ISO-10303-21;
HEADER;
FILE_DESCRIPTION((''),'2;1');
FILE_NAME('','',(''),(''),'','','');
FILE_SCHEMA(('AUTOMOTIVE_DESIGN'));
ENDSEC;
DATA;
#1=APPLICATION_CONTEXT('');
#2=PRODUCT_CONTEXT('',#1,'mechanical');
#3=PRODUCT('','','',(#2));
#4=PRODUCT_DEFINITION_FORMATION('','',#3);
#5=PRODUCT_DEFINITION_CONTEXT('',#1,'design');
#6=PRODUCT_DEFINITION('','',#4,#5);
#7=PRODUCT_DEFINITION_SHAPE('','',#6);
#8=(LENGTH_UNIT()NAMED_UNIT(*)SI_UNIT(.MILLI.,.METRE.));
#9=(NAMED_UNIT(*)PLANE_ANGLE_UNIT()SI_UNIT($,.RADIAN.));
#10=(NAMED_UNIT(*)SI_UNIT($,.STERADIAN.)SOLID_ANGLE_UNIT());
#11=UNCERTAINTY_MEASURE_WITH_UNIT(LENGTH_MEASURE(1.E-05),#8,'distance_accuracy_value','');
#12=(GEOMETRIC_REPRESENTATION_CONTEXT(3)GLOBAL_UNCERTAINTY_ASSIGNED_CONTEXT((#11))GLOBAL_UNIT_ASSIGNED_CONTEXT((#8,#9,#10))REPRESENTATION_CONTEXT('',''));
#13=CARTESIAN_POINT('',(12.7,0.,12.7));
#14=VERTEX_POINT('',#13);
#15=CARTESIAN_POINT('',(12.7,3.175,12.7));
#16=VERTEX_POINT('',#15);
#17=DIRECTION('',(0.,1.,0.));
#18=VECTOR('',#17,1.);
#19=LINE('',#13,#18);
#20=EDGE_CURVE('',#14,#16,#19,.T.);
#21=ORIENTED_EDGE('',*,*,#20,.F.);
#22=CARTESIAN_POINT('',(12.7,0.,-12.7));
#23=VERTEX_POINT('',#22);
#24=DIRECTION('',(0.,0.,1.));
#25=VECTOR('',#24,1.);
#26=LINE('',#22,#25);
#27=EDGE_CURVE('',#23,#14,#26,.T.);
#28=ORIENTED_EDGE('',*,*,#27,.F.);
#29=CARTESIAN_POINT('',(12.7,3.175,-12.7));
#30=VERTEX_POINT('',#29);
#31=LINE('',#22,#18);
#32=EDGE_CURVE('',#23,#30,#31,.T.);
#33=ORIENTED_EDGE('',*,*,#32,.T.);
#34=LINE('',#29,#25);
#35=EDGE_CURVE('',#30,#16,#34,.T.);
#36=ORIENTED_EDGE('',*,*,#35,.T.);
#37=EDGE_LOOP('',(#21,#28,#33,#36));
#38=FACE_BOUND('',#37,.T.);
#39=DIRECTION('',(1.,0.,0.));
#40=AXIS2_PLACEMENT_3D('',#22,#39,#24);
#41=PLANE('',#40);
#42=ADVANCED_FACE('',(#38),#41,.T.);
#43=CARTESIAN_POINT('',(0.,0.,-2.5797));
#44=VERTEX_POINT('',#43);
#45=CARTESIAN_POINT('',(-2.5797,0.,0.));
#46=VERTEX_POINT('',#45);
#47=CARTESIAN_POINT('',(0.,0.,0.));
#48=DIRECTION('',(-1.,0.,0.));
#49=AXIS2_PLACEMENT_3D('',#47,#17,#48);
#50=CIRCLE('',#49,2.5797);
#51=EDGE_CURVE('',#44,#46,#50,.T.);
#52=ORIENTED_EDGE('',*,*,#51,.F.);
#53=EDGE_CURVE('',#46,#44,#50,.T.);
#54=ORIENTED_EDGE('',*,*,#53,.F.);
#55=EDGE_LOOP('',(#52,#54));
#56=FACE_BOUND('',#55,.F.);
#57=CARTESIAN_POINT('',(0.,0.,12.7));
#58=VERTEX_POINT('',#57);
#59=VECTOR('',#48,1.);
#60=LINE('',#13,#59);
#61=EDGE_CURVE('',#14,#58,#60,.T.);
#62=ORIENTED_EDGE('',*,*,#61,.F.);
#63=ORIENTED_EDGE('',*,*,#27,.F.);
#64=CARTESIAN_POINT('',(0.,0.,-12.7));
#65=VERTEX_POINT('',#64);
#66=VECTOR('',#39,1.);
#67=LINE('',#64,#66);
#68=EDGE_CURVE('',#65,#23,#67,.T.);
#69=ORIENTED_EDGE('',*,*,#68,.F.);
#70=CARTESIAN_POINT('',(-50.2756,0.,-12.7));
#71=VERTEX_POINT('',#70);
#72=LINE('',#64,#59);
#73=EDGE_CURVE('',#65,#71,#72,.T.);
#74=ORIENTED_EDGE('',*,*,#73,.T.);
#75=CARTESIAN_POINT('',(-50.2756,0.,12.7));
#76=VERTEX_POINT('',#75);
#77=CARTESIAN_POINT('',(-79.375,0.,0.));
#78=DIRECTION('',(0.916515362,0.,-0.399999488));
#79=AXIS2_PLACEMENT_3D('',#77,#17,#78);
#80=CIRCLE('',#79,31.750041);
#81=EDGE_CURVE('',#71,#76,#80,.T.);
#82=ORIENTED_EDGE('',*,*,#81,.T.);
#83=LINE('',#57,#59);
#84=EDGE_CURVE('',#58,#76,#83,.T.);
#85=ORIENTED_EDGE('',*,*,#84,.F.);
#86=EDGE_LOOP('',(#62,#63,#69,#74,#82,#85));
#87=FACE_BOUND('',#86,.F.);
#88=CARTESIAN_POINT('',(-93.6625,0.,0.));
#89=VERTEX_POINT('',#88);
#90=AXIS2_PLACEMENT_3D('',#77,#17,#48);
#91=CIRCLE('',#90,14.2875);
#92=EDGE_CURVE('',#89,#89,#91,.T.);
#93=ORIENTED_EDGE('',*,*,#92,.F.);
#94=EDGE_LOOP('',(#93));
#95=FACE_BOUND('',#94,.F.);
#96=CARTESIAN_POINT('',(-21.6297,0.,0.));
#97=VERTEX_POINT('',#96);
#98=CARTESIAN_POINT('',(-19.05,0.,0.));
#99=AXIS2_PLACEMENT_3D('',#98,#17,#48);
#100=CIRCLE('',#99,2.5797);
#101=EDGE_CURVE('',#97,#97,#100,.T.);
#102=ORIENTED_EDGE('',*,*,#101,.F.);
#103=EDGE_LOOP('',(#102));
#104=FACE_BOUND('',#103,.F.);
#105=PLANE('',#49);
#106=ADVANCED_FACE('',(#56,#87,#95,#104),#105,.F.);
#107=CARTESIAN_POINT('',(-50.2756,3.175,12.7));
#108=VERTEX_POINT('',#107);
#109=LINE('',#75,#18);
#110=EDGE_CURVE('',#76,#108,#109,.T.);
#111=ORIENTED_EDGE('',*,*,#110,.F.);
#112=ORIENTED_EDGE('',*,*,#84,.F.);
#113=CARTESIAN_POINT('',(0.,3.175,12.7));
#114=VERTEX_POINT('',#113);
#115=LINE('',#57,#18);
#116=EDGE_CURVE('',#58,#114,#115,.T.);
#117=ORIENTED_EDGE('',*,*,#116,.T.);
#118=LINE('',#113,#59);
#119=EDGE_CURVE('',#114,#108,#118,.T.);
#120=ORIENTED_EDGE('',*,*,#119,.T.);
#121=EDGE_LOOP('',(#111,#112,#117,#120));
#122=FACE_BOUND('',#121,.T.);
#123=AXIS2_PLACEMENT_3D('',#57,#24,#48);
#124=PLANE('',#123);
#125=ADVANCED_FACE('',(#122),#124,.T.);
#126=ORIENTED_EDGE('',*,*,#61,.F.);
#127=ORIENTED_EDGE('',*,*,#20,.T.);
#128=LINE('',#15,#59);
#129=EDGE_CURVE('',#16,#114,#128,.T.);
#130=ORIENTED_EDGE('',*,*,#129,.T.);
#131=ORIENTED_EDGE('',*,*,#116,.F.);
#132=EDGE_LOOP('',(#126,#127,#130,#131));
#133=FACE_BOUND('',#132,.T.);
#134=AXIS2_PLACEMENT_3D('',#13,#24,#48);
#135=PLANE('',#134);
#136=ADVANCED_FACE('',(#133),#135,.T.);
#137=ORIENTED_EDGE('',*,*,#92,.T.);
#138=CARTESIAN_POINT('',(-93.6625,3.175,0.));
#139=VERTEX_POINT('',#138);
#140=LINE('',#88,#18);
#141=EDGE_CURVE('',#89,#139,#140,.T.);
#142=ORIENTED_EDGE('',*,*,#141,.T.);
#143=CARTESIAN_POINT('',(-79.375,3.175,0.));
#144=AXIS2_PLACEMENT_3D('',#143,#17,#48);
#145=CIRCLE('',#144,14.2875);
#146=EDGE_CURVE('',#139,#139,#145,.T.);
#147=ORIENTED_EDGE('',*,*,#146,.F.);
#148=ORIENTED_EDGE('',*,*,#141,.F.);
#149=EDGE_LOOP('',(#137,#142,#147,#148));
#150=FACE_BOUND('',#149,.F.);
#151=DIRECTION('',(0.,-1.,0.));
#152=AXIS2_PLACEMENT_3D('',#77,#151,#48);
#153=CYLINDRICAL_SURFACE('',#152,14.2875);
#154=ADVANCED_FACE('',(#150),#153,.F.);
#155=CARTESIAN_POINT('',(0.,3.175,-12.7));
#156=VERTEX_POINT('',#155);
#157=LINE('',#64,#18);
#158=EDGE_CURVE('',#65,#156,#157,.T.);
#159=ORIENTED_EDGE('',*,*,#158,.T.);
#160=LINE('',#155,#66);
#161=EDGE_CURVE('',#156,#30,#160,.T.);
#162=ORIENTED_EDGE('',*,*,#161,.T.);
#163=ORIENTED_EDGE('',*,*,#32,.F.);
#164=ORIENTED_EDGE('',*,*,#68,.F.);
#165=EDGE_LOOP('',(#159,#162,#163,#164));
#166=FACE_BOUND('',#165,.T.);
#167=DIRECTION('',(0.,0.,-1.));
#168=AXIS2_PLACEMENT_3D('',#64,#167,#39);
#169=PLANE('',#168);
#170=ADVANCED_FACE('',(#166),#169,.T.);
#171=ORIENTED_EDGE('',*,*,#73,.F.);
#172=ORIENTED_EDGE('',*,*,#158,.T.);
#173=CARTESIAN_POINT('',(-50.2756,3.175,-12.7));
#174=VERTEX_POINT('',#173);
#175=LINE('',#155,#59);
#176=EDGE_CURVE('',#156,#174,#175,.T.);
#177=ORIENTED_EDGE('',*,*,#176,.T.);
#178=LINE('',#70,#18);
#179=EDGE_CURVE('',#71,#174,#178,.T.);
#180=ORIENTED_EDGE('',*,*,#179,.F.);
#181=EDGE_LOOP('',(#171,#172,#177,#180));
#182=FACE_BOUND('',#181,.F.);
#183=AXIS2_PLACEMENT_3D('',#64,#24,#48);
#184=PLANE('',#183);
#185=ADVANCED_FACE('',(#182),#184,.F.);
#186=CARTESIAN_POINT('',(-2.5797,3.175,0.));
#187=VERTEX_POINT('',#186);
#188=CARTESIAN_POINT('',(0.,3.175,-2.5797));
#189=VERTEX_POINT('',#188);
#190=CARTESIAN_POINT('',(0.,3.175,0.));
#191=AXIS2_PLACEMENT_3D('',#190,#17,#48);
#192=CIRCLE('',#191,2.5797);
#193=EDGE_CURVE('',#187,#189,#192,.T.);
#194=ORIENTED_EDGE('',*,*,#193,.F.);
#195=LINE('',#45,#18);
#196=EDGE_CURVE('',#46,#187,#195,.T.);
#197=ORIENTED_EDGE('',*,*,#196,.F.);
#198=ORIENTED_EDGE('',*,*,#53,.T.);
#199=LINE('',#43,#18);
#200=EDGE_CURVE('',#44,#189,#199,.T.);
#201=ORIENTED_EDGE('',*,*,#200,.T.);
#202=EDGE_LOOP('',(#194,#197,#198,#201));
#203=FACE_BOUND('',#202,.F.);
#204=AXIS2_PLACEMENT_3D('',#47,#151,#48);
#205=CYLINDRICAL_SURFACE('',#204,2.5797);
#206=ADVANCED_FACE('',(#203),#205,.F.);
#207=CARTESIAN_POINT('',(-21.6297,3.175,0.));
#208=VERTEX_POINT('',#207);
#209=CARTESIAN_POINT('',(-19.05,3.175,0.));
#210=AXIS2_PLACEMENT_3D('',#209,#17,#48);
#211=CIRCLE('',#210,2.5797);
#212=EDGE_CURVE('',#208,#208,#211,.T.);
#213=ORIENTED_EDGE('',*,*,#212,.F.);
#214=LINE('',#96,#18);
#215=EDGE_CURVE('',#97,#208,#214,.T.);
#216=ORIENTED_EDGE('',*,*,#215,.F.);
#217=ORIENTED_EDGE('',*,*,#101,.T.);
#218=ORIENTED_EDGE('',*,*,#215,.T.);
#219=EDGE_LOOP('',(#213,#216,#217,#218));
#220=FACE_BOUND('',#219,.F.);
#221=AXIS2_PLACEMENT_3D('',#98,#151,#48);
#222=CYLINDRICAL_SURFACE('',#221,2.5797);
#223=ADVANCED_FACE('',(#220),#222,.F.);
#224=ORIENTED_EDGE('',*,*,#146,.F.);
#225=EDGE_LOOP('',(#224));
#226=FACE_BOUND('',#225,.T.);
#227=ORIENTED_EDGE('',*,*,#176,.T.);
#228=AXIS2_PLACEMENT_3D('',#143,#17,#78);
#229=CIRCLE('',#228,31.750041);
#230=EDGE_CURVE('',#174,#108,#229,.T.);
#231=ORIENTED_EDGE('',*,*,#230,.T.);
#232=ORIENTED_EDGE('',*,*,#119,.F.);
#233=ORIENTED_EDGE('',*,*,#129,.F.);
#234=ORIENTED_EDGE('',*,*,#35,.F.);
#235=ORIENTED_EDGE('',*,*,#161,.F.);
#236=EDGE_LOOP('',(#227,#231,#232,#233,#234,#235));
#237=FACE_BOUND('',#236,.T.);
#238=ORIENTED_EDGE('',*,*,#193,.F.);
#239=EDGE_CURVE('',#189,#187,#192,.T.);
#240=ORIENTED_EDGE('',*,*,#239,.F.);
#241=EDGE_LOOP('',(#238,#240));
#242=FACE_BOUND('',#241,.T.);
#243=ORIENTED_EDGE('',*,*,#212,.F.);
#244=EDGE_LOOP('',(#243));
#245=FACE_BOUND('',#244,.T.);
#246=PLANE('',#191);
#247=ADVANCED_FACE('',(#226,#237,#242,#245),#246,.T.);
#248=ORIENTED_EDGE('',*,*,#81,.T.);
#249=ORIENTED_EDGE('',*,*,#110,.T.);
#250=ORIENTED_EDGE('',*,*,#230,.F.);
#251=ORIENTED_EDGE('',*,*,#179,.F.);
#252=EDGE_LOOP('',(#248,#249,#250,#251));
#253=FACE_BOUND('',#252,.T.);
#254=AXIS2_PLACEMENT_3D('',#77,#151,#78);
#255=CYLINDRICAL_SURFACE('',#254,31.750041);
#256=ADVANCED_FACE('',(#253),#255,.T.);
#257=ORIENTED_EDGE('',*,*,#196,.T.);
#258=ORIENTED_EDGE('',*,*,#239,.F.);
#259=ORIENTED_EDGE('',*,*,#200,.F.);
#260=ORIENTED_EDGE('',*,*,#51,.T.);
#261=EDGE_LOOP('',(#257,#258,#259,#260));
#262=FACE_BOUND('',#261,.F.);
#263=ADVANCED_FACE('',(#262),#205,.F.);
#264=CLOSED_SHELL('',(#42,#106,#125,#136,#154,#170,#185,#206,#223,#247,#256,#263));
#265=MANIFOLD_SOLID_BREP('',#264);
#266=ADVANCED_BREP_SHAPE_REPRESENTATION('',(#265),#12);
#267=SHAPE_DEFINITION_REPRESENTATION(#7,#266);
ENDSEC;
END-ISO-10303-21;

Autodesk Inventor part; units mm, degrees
ref_plane "YZ Plane" through (0, 0, 0) normal (1, 0, 0) x (0, 1, 0)
ref_plane "XZ Plane" through (0, 0, 0) normal (0, 1, 0) x (-1, 0, 0)
ref_plane "XY Plane" through (0, 0, 0) normal (0, 0, 1) x (1, 0, 0)
sketch "Sketch1" plane through (0, 0, 0) normal (0, 1, 0) x (-1, 0, 0)
  line L0 (0, 0) -> (0, -12.7)
  line L1 (0, -12.7) -> (50.8, -12.7)
  line L2 (0, 12.7) -> (50.8, 12.7)
  line L3 (50.8, -12.7) -> (50.8, 0) construction
  line L4 (50.8, 0) -> (79.375, 0) construction
  circle A0 centre (79.375, 0) radius 14.2875
  arc A1 (50.2756, -12.7) -> (50.2756, 12.7) centre (79.375, 0) ccw
  line L5 (0, 0) -> (19.05, 0) construction
  circle A2 centre (19.05, 0) radius 2.5797
  circle A3 centre (0, 0) radius 2.5797
  line L6 (0, -12.7) -> (-12.7, -12.7)
  line L7 (-12.7, -12.7) -> (-12.7, 12.7)
  line L8 (-12.7, 12.7) -> (0, 12.7)
  line L9 (-12.7, 0) -> (0, 0) construction
  dimension "d1" = 50.8
  dimension "d2" = 28.575
  dimension "d3" = 28.575
  dimension "d4" = 63.5
  dimension "d6" = 19.05
  dimension "d7" = 5.1594
  dimension "d8" = 5.1594
  dimension "d11" = 12.7
  dimension "d14" = 12.7
extrude "Extrusion1" add sketch "Sketch1" along normal blind 3.175
properties part number "wheel tip"
